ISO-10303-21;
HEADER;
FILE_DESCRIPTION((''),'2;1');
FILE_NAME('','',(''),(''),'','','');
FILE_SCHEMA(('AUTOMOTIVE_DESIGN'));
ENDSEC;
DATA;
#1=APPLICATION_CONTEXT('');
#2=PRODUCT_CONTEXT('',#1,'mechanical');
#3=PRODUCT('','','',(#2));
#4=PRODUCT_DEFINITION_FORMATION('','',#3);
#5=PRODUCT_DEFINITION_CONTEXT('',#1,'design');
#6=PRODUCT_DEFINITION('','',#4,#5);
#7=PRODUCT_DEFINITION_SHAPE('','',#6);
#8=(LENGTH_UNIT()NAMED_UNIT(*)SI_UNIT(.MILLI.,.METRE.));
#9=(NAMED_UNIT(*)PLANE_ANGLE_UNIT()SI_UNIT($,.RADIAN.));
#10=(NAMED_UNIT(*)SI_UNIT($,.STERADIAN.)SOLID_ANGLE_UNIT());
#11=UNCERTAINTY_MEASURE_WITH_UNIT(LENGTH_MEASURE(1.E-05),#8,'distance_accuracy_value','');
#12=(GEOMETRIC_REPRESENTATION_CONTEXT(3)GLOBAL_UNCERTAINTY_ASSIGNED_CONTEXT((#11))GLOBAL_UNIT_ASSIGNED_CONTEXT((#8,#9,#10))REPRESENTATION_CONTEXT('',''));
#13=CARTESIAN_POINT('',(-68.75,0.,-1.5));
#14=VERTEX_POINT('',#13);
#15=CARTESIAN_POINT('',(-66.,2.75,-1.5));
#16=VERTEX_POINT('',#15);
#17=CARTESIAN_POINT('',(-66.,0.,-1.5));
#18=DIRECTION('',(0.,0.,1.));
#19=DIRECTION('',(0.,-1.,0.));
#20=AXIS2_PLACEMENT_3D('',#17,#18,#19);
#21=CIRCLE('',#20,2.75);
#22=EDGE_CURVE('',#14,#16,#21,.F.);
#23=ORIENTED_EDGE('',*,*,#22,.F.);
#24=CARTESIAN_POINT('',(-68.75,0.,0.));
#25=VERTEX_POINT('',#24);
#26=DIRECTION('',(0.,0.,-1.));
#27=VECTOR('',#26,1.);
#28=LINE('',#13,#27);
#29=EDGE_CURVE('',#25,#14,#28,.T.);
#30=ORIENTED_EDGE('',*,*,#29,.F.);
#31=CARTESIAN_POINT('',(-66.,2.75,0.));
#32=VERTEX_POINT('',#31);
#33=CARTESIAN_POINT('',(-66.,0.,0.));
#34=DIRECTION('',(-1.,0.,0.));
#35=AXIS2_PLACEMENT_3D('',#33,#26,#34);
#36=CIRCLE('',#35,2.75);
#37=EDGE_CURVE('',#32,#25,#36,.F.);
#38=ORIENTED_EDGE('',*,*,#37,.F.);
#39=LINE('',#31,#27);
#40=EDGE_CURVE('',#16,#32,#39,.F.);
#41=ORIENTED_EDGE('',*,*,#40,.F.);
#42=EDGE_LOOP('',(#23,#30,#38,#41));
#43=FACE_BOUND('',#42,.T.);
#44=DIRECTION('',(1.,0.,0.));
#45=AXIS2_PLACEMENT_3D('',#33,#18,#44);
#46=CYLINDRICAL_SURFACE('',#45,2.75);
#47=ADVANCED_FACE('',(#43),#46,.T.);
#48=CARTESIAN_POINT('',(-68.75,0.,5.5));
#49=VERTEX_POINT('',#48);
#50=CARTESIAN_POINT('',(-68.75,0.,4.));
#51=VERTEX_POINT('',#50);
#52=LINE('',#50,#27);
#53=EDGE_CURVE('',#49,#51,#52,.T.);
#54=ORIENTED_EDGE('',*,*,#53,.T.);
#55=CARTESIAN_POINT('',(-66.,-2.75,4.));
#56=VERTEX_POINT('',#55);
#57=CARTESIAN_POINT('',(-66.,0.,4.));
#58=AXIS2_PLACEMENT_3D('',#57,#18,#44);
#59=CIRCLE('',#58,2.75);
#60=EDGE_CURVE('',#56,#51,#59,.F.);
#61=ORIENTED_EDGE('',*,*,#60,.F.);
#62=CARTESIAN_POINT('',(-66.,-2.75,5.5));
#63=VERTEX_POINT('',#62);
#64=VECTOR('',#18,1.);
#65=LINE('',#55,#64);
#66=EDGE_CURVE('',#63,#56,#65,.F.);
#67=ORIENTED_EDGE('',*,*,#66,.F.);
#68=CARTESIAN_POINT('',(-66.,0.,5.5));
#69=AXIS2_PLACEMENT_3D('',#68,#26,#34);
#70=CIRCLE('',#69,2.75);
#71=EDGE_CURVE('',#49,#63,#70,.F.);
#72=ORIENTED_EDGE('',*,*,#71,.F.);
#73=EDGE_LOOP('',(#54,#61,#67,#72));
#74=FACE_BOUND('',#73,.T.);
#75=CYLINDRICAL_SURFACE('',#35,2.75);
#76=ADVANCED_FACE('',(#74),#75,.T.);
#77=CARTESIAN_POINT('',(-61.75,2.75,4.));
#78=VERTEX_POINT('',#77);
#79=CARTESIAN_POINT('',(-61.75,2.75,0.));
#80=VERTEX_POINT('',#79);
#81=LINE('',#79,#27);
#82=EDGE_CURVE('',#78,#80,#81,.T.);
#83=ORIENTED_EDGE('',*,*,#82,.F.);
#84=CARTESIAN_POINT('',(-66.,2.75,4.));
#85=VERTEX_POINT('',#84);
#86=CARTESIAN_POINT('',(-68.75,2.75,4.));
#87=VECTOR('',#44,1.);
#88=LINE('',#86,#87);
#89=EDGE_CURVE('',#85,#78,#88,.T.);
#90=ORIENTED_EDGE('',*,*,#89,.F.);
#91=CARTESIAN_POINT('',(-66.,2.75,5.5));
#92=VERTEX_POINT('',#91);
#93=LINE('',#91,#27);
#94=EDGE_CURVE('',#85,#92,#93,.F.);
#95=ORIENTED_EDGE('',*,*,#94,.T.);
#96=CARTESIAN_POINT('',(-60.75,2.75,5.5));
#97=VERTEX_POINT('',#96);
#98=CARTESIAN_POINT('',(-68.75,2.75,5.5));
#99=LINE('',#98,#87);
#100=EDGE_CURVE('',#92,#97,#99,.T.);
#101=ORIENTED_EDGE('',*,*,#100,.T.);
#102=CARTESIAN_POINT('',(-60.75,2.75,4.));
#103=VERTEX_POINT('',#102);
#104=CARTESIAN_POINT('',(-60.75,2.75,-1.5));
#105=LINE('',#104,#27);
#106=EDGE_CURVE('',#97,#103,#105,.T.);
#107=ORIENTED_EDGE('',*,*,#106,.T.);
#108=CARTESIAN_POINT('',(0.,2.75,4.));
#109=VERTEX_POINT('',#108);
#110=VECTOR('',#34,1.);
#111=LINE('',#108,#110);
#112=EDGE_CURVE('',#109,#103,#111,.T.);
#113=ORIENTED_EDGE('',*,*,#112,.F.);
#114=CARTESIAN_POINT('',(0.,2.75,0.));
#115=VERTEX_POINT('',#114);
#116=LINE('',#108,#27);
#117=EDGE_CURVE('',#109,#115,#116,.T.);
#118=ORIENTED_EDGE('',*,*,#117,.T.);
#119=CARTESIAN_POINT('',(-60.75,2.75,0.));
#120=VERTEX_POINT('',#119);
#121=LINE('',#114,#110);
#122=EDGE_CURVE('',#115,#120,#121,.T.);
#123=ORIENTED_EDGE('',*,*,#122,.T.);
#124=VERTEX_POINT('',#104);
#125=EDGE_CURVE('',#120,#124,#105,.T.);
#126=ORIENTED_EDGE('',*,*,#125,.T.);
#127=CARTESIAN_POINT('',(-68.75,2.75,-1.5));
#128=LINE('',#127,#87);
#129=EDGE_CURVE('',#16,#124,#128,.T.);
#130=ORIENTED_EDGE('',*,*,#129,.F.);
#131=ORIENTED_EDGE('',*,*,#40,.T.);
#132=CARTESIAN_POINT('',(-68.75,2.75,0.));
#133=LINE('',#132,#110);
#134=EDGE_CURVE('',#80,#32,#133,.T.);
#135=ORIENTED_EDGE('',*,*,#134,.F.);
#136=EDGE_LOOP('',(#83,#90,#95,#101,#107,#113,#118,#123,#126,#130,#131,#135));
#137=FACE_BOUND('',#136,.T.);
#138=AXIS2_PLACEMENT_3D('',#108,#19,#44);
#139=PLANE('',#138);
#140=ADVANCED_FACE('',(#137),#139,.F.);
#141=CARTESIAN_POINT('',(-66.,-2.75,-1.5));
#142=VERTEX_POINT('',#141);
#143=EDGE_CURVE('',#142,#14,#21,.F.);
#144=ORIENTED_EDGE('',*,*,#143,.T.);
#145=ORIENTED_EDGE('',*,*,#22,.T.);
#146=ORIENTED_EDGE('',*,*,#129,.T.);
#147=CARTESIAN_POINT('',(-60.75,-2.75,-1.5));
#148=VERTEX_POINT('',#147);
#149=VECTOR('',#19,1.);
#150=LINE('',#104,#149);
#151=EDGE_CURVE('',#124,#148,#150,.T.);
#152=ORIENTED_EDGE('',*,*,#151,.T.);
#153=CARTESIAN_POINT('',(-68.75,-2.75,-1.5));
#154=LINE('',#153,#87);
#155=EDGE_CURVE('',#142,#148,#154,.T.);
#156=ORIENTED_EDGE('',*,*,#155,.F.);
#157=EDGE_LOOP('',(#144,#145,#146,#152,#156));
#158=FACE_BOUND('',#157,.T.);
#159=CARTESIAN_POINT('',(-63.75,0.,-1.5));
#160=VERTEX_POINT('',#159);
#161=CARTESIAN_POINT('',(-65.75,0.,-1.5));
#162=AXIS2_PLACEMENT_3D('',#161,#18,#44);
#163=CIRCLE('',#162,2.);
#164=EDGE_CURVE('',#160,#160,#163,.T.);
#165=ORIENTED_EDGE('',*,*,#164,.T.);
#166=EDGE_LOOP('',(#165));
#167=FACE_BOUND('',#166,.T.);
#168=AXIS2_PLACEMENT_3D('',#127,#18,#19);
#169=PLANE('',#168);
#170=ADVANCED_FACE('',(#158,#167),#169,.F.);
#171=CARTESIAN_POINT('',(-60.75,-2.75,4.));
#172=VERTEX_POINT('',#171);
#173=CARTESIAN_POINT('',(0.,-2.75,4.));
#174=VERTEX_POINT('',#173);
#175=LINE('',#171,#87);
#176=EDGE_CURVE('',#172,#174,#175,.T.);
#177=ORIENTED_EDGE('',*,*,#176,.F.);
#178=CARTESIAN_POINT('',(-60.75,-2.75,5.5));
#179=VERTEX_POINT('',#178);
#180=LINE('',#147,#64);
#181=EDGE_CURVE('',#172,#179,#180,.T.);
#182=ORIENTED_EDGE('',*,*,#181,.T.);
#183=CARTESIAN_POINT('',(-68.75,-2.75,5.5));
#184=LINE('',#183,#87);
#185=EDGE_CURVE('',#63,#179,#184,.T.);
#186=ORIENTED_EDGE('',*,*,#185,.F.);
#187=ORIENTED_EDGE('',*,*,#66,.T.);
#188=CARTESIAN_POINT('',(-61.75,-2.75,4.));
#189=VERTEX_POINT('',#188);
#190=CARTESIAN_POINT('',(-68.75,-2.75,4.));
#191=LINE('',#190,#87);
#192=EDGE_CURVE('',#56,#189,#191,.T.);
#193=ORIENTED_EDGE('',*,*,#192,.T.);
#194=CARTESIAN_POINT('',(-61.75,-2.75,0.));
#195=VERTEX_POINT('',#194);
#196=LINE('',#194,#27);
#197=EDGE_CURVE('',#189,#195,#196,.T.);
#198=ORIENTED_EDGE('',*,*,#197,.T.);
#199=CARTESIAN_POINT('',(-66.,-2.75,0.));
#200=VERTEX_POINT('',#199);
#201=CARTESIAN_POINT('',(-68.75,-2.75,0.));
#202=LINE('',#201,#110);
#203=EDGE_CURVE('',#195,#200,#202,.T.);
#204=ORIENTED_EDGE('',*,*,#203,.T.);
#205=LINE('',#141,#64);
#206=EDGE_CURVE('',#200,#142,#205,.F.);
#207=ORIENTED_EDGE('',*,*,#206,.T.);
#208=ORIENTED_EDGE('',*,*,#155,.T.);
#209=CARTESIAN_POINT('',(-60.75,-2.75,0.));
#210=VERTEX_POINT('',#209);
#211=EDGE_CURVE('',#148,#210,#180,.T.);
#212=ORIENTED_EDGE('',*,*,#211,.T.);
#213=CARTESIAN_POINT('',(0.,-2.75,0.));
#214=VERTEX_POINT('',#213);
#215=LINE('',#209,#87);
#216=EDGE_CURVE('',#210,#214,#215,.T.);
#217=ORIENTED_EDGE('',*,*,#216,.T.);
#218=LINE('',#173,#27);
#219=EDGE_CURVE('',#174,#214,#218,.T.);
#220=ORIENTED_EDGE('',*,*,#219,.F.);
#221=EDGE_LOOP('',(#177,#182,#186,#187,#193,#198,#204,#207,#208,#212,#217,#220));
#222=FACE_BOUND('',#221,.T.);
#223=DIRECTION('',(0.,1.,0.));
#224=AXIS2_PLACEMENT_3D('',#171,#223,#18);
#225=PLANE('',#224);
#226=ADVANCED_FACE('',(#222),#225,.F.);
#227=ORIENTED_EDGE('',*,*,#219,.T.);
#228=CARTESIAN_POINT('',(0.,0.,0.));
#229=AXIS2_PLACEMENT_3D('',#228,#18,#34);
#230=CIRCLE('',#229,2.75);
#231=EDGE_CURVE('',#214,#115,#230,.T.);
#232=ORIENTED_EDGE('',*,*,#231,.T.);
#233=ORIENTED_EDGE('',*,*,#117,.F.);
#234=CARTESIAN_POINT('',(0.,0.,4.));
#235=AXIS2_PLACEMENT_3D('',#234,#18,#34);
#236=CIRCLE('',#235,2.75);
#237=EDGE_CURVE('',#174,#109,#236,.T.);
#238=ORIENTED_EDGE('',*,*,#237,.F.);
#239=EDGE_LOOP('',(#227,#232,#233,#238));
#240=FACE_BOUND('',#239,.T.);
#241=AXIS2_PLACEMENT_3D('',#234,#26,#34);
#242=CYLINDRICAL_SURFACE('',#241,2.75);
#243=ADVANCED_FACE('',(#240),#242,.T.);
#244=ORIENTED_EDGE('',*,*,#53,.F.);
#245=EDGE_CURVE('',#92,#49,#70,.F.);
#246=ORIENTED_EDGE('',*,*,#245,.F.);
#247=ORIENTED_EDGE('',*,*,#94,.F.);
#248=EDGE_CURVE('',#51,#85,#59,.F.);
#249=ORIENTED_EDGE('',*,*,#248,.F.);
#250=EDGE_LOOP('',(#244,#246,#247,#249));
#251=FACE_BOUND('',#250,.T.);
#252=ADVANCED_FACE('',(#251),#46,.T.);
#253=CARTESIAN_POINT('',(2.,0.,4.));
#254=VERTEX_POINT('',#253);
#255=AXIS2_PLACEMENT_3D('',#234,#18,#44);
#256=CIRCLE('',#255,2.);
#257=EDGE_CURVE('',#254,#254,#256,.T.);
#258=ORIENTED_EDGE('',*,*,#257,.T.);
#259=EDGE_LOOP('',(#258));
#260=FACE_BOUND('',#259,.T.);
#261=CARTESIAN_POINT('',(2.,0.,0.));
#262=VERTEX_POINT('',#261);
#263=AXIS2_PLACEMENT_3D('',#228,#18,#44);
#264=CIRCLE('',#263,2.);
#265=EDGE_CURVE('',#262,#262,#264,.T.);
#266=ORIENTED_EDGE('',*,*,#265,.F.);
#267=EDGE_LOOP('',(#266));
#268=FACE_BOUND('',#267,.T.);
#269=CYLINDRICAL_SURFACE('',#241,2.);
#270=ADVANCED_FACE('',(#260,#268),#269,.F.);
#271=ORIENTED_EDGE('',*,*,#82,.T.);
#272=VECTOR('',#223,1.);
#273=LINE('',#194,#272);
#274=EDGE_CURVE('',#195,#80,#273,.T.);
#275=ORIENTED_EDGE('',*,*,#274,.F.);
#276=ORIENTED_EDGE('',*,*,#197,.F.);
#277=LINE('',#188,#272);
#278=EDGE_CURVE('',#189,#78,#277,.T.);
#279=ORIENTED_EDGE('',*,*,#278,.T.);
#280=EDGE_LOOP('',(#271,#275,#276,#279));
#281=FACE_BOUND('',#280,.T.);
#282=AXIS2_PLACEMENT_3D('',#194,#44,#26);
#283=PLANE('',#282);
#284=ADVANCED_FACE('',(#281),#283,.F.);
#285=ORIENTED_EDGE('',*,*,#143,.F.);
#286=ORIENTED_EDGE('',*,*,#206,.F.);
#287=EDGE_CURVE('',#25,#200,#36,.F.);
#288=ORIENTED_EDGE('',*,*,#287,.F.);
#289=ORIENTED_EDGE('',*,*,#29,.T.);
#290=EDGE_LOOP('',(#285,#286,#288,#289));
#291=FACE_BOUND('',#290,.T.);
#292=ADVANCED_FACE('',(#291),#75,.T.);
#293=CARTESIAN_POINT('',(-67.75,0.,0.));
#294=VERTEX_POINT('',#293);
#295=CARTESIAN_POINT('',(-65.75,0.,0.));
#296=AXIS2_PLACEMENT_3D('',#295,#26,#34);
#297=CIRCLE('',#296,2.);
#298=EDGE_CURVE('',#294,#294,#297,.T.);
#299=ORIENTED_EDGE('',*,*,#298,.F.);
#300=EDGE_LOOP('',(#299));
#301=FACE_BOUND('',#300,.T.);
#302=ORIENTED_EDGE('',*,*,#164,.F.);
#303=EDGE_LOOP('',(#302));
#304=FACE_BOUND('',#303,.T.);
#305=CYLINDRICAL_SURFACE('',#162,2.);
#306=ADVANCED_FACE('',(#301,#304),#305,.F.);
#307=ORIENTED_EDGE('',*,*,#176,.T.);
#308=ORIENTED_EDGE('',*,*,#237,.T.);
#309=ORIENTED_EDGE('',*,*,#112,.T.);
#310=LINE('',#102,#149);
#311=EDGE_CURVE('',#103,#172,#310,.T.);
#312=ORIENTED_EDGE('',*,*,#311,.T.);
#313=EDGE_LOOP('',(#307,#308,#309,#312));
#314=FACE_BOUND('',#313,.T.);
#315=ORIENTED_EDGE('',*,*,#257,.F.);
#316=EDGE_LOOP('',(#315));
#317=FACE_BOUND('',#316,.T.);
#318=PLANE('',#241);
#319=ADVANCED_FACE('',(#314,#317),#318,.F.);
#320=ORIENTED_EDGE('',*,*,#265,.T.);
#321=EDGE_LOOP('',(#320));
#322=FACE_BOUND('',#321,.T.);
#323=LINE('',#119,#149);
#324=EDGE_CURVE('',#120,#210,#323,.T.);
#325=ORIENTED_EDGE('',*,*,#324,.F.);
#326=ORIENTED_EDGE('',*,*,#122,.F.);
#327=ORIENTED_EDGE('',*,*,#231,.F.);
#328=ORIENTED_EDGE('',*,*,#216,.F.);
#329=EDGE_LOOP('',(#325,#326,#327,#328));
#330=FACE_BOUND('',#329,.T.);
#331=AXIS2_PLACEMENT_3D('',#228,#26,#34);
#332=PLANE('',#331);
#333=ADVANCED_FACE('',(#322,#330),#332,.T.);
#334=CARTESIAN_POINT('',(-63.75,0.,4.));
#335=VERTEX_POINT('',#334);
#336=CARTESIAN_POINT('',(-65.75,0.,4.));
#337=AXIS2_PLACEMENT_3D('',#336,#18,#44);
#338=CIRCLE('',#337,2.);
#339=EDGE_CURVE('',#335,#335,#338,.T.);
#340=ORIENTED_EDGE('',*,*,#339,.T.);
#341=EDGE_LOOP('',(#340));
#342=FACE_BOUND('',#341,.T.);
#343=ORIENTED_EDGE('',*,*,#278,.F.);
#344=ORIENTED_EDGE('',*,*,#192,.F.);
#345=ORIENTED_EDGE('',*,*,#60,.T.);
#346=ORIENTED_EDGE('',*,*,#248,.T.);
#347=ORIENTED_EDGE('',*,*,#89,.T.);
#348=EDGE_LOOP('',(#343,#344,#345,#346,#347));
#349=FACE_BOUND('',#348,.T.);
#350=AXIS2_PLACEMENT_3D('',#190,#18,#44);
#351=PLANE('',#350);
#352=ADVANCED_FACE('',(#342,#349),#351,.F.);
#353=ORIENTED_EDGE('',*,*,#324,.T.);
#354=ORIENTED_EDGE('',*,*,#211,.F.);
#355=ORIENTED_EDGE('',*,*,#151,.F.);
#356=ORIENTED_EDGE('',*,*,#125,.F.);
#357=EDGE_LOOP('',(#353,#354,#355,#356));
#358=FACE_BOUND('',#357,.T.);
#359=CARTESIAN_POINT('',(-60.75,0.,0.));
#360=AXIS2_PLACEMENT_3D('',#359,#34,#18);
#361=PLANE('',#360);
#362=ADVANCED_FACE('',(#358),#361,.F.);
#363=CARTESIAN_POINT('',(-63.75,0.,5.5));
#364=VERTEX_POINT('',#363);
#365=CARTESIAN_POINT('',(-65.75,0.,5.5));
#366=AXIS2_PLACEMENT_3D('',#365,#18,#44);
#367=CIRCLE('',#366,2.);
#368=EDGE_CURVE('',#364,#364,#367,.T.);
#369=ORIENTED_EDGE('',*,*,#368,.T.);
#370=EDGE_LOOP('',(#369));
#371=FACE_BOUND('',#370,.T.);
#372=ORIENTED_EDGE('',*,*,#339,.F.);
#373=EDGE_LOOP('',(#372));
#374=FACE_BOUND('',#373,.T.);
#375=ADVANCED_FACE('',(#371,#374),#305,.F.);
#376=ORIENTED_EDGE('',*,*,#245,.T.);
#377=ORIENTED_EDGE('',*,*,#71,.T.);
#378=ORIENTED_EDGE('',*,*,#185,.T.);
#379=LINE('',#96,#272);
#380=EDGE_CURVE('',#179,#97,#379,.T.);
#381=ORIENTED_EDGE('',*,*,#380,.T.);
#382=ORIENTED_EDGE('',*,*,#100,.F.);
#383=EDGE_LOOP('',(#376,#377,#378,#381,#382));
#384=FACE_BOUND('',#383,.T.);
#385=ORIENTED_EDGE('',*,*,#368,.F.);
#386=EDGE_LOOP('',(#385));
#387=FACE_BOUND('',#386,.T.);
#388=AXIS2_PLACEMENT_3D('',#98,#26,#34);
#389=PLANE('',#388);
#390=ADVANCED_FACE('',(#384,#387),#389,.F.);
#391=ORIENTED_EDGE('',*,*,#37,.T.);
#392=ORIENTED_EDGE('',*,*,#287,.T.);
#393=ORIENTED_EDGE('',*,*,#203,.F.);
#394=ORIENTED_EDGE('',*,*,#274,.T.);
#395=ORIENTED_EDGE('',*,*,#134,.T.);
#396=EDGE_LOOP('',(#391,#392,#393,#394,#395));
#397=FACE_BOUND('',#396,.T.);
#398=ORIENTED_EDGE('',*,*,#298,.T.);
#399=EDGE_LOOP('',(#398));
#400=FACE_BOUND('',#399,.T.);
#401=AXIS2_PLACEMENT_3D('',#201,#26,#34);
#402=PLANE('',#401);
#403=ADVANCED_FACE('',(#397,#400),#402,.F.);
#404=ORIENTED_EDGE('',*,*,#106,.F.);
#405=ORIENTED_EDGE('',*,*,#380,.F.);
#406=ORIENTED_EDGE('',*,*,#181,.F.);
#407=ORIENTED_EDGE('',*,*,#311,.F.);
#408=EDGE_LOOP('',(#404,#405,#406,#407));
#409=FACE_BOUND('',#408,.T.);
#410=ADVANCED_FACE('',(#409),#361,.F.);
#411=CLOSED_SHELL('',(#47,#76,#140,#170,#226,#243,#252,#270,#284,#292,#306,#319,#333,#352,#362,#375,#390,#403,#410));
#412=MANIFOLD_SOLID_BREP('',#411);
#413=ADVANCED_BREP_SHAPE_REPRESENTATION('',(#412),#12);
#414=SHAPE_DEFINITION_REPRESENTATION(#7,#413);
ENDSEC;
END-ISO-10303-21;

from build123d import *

# Parameters (mm, degrees)
SKETCH1_R               = 2
BOSS_EXTRUDE1_DEPTH     = 4
SKETCH2_W               = 7
SKETCH2_H               = 5.5
BOSS_EXTRUDE2_DEPTH     = 8
CUT_EXTRUDE1_DEPTH      = 70.024452189
CUT_EXTRUDE1_DEPTH_BACK = 70.024452189
SKETCH4_W               = 7
SKETCH4_H               = 4
CUT_EXTRUDE2_DEPTH      = 70.024452189
CUT_EXTRUDE2_DEPTH_BACK = 70.024452189
SKETCH5_R               = 2
FILLET1_R               = 2.75


with BuildPart() as part:
    # Sketch1 → Boss-Extrude1 (new body)
    with BuildSketch(Plane.XY):
        with BuildLine():
            Line((0, 2.75), (-60.75, 2.75))
            Line((-60.75, 2.75), (-60.75, -2.75))
            Line((-60.75, -2.75), (0, -2.75))
            ThreePointArc((0, -2.75), (2.75, 0), (0, 2.75))
        make_face()
        Circle(SKETCH1_R, mode=Mode.SUBTRACT)
    extrude(amount=BOSS_EXTRUDE1_DEPTH)

    # Sketch2 → Boss-Extrude2 (add)
    with BuildSketch(Plane.ZY.offset(60.75)):
        with Locations((2, 0)):
            Rectangle(SKETCH2_W, SKETCH2_H)
    extrude(amount=BOSS_EXTRUDE2_DEPTH)

    # Sketch4 → Cut-Extrude1 (cut, two sides: drawn at the far end of the back side and taken through both)
    with BuildSketch(Plane(origin=(0, 0, 0), x_dir=(1, 0, 0), z_dir=(0, 1, 0)).offset(-CUT_EXTRUDE1_DEPTH_BACK)):
        with Locations((-65.25, -2)):
            Rectangle(SKETCH4_W, SKETCH4_H)
    extrude(amount=CUT_EXTRUDE1_DEPTH + CUT_EXTRUDE1_DEPTH_BACK, mode=Mode.SUBTRACT)

    # Sketch5 → Cut-Extrude2 (cut, two sides: drawn at the far end of the back side and taken through both)
    with BuildSketch(Plane.XY.offset(-CUT_EXTRUDE2_DEPTH_BACK)):
        with Locations((-65.75, 0)):
            Circle(SKETCH5_R)
    extrude(amount=CUT_EXTRUDE2_DEPTH + CUT_EXTRUDE2_DEPTH_BACK, mode=Mode.SUBTRACT)

    # Fillet1
    fillet1_edges = [part.edges().sort_by_distance(p)[0] for p in [
        (-68.75, -2.75, 4.75),
        (-68.75, -2.75, -0.75),
        (-68.75, 2.75, -0.75),
        (-68.75, 2.75, 4.75),
    ]]
    fillet(fillet1_edges, radius=FILLET1_R - 0.0001)  # a hair under: the kernel refuses the full size


solid = part.part
